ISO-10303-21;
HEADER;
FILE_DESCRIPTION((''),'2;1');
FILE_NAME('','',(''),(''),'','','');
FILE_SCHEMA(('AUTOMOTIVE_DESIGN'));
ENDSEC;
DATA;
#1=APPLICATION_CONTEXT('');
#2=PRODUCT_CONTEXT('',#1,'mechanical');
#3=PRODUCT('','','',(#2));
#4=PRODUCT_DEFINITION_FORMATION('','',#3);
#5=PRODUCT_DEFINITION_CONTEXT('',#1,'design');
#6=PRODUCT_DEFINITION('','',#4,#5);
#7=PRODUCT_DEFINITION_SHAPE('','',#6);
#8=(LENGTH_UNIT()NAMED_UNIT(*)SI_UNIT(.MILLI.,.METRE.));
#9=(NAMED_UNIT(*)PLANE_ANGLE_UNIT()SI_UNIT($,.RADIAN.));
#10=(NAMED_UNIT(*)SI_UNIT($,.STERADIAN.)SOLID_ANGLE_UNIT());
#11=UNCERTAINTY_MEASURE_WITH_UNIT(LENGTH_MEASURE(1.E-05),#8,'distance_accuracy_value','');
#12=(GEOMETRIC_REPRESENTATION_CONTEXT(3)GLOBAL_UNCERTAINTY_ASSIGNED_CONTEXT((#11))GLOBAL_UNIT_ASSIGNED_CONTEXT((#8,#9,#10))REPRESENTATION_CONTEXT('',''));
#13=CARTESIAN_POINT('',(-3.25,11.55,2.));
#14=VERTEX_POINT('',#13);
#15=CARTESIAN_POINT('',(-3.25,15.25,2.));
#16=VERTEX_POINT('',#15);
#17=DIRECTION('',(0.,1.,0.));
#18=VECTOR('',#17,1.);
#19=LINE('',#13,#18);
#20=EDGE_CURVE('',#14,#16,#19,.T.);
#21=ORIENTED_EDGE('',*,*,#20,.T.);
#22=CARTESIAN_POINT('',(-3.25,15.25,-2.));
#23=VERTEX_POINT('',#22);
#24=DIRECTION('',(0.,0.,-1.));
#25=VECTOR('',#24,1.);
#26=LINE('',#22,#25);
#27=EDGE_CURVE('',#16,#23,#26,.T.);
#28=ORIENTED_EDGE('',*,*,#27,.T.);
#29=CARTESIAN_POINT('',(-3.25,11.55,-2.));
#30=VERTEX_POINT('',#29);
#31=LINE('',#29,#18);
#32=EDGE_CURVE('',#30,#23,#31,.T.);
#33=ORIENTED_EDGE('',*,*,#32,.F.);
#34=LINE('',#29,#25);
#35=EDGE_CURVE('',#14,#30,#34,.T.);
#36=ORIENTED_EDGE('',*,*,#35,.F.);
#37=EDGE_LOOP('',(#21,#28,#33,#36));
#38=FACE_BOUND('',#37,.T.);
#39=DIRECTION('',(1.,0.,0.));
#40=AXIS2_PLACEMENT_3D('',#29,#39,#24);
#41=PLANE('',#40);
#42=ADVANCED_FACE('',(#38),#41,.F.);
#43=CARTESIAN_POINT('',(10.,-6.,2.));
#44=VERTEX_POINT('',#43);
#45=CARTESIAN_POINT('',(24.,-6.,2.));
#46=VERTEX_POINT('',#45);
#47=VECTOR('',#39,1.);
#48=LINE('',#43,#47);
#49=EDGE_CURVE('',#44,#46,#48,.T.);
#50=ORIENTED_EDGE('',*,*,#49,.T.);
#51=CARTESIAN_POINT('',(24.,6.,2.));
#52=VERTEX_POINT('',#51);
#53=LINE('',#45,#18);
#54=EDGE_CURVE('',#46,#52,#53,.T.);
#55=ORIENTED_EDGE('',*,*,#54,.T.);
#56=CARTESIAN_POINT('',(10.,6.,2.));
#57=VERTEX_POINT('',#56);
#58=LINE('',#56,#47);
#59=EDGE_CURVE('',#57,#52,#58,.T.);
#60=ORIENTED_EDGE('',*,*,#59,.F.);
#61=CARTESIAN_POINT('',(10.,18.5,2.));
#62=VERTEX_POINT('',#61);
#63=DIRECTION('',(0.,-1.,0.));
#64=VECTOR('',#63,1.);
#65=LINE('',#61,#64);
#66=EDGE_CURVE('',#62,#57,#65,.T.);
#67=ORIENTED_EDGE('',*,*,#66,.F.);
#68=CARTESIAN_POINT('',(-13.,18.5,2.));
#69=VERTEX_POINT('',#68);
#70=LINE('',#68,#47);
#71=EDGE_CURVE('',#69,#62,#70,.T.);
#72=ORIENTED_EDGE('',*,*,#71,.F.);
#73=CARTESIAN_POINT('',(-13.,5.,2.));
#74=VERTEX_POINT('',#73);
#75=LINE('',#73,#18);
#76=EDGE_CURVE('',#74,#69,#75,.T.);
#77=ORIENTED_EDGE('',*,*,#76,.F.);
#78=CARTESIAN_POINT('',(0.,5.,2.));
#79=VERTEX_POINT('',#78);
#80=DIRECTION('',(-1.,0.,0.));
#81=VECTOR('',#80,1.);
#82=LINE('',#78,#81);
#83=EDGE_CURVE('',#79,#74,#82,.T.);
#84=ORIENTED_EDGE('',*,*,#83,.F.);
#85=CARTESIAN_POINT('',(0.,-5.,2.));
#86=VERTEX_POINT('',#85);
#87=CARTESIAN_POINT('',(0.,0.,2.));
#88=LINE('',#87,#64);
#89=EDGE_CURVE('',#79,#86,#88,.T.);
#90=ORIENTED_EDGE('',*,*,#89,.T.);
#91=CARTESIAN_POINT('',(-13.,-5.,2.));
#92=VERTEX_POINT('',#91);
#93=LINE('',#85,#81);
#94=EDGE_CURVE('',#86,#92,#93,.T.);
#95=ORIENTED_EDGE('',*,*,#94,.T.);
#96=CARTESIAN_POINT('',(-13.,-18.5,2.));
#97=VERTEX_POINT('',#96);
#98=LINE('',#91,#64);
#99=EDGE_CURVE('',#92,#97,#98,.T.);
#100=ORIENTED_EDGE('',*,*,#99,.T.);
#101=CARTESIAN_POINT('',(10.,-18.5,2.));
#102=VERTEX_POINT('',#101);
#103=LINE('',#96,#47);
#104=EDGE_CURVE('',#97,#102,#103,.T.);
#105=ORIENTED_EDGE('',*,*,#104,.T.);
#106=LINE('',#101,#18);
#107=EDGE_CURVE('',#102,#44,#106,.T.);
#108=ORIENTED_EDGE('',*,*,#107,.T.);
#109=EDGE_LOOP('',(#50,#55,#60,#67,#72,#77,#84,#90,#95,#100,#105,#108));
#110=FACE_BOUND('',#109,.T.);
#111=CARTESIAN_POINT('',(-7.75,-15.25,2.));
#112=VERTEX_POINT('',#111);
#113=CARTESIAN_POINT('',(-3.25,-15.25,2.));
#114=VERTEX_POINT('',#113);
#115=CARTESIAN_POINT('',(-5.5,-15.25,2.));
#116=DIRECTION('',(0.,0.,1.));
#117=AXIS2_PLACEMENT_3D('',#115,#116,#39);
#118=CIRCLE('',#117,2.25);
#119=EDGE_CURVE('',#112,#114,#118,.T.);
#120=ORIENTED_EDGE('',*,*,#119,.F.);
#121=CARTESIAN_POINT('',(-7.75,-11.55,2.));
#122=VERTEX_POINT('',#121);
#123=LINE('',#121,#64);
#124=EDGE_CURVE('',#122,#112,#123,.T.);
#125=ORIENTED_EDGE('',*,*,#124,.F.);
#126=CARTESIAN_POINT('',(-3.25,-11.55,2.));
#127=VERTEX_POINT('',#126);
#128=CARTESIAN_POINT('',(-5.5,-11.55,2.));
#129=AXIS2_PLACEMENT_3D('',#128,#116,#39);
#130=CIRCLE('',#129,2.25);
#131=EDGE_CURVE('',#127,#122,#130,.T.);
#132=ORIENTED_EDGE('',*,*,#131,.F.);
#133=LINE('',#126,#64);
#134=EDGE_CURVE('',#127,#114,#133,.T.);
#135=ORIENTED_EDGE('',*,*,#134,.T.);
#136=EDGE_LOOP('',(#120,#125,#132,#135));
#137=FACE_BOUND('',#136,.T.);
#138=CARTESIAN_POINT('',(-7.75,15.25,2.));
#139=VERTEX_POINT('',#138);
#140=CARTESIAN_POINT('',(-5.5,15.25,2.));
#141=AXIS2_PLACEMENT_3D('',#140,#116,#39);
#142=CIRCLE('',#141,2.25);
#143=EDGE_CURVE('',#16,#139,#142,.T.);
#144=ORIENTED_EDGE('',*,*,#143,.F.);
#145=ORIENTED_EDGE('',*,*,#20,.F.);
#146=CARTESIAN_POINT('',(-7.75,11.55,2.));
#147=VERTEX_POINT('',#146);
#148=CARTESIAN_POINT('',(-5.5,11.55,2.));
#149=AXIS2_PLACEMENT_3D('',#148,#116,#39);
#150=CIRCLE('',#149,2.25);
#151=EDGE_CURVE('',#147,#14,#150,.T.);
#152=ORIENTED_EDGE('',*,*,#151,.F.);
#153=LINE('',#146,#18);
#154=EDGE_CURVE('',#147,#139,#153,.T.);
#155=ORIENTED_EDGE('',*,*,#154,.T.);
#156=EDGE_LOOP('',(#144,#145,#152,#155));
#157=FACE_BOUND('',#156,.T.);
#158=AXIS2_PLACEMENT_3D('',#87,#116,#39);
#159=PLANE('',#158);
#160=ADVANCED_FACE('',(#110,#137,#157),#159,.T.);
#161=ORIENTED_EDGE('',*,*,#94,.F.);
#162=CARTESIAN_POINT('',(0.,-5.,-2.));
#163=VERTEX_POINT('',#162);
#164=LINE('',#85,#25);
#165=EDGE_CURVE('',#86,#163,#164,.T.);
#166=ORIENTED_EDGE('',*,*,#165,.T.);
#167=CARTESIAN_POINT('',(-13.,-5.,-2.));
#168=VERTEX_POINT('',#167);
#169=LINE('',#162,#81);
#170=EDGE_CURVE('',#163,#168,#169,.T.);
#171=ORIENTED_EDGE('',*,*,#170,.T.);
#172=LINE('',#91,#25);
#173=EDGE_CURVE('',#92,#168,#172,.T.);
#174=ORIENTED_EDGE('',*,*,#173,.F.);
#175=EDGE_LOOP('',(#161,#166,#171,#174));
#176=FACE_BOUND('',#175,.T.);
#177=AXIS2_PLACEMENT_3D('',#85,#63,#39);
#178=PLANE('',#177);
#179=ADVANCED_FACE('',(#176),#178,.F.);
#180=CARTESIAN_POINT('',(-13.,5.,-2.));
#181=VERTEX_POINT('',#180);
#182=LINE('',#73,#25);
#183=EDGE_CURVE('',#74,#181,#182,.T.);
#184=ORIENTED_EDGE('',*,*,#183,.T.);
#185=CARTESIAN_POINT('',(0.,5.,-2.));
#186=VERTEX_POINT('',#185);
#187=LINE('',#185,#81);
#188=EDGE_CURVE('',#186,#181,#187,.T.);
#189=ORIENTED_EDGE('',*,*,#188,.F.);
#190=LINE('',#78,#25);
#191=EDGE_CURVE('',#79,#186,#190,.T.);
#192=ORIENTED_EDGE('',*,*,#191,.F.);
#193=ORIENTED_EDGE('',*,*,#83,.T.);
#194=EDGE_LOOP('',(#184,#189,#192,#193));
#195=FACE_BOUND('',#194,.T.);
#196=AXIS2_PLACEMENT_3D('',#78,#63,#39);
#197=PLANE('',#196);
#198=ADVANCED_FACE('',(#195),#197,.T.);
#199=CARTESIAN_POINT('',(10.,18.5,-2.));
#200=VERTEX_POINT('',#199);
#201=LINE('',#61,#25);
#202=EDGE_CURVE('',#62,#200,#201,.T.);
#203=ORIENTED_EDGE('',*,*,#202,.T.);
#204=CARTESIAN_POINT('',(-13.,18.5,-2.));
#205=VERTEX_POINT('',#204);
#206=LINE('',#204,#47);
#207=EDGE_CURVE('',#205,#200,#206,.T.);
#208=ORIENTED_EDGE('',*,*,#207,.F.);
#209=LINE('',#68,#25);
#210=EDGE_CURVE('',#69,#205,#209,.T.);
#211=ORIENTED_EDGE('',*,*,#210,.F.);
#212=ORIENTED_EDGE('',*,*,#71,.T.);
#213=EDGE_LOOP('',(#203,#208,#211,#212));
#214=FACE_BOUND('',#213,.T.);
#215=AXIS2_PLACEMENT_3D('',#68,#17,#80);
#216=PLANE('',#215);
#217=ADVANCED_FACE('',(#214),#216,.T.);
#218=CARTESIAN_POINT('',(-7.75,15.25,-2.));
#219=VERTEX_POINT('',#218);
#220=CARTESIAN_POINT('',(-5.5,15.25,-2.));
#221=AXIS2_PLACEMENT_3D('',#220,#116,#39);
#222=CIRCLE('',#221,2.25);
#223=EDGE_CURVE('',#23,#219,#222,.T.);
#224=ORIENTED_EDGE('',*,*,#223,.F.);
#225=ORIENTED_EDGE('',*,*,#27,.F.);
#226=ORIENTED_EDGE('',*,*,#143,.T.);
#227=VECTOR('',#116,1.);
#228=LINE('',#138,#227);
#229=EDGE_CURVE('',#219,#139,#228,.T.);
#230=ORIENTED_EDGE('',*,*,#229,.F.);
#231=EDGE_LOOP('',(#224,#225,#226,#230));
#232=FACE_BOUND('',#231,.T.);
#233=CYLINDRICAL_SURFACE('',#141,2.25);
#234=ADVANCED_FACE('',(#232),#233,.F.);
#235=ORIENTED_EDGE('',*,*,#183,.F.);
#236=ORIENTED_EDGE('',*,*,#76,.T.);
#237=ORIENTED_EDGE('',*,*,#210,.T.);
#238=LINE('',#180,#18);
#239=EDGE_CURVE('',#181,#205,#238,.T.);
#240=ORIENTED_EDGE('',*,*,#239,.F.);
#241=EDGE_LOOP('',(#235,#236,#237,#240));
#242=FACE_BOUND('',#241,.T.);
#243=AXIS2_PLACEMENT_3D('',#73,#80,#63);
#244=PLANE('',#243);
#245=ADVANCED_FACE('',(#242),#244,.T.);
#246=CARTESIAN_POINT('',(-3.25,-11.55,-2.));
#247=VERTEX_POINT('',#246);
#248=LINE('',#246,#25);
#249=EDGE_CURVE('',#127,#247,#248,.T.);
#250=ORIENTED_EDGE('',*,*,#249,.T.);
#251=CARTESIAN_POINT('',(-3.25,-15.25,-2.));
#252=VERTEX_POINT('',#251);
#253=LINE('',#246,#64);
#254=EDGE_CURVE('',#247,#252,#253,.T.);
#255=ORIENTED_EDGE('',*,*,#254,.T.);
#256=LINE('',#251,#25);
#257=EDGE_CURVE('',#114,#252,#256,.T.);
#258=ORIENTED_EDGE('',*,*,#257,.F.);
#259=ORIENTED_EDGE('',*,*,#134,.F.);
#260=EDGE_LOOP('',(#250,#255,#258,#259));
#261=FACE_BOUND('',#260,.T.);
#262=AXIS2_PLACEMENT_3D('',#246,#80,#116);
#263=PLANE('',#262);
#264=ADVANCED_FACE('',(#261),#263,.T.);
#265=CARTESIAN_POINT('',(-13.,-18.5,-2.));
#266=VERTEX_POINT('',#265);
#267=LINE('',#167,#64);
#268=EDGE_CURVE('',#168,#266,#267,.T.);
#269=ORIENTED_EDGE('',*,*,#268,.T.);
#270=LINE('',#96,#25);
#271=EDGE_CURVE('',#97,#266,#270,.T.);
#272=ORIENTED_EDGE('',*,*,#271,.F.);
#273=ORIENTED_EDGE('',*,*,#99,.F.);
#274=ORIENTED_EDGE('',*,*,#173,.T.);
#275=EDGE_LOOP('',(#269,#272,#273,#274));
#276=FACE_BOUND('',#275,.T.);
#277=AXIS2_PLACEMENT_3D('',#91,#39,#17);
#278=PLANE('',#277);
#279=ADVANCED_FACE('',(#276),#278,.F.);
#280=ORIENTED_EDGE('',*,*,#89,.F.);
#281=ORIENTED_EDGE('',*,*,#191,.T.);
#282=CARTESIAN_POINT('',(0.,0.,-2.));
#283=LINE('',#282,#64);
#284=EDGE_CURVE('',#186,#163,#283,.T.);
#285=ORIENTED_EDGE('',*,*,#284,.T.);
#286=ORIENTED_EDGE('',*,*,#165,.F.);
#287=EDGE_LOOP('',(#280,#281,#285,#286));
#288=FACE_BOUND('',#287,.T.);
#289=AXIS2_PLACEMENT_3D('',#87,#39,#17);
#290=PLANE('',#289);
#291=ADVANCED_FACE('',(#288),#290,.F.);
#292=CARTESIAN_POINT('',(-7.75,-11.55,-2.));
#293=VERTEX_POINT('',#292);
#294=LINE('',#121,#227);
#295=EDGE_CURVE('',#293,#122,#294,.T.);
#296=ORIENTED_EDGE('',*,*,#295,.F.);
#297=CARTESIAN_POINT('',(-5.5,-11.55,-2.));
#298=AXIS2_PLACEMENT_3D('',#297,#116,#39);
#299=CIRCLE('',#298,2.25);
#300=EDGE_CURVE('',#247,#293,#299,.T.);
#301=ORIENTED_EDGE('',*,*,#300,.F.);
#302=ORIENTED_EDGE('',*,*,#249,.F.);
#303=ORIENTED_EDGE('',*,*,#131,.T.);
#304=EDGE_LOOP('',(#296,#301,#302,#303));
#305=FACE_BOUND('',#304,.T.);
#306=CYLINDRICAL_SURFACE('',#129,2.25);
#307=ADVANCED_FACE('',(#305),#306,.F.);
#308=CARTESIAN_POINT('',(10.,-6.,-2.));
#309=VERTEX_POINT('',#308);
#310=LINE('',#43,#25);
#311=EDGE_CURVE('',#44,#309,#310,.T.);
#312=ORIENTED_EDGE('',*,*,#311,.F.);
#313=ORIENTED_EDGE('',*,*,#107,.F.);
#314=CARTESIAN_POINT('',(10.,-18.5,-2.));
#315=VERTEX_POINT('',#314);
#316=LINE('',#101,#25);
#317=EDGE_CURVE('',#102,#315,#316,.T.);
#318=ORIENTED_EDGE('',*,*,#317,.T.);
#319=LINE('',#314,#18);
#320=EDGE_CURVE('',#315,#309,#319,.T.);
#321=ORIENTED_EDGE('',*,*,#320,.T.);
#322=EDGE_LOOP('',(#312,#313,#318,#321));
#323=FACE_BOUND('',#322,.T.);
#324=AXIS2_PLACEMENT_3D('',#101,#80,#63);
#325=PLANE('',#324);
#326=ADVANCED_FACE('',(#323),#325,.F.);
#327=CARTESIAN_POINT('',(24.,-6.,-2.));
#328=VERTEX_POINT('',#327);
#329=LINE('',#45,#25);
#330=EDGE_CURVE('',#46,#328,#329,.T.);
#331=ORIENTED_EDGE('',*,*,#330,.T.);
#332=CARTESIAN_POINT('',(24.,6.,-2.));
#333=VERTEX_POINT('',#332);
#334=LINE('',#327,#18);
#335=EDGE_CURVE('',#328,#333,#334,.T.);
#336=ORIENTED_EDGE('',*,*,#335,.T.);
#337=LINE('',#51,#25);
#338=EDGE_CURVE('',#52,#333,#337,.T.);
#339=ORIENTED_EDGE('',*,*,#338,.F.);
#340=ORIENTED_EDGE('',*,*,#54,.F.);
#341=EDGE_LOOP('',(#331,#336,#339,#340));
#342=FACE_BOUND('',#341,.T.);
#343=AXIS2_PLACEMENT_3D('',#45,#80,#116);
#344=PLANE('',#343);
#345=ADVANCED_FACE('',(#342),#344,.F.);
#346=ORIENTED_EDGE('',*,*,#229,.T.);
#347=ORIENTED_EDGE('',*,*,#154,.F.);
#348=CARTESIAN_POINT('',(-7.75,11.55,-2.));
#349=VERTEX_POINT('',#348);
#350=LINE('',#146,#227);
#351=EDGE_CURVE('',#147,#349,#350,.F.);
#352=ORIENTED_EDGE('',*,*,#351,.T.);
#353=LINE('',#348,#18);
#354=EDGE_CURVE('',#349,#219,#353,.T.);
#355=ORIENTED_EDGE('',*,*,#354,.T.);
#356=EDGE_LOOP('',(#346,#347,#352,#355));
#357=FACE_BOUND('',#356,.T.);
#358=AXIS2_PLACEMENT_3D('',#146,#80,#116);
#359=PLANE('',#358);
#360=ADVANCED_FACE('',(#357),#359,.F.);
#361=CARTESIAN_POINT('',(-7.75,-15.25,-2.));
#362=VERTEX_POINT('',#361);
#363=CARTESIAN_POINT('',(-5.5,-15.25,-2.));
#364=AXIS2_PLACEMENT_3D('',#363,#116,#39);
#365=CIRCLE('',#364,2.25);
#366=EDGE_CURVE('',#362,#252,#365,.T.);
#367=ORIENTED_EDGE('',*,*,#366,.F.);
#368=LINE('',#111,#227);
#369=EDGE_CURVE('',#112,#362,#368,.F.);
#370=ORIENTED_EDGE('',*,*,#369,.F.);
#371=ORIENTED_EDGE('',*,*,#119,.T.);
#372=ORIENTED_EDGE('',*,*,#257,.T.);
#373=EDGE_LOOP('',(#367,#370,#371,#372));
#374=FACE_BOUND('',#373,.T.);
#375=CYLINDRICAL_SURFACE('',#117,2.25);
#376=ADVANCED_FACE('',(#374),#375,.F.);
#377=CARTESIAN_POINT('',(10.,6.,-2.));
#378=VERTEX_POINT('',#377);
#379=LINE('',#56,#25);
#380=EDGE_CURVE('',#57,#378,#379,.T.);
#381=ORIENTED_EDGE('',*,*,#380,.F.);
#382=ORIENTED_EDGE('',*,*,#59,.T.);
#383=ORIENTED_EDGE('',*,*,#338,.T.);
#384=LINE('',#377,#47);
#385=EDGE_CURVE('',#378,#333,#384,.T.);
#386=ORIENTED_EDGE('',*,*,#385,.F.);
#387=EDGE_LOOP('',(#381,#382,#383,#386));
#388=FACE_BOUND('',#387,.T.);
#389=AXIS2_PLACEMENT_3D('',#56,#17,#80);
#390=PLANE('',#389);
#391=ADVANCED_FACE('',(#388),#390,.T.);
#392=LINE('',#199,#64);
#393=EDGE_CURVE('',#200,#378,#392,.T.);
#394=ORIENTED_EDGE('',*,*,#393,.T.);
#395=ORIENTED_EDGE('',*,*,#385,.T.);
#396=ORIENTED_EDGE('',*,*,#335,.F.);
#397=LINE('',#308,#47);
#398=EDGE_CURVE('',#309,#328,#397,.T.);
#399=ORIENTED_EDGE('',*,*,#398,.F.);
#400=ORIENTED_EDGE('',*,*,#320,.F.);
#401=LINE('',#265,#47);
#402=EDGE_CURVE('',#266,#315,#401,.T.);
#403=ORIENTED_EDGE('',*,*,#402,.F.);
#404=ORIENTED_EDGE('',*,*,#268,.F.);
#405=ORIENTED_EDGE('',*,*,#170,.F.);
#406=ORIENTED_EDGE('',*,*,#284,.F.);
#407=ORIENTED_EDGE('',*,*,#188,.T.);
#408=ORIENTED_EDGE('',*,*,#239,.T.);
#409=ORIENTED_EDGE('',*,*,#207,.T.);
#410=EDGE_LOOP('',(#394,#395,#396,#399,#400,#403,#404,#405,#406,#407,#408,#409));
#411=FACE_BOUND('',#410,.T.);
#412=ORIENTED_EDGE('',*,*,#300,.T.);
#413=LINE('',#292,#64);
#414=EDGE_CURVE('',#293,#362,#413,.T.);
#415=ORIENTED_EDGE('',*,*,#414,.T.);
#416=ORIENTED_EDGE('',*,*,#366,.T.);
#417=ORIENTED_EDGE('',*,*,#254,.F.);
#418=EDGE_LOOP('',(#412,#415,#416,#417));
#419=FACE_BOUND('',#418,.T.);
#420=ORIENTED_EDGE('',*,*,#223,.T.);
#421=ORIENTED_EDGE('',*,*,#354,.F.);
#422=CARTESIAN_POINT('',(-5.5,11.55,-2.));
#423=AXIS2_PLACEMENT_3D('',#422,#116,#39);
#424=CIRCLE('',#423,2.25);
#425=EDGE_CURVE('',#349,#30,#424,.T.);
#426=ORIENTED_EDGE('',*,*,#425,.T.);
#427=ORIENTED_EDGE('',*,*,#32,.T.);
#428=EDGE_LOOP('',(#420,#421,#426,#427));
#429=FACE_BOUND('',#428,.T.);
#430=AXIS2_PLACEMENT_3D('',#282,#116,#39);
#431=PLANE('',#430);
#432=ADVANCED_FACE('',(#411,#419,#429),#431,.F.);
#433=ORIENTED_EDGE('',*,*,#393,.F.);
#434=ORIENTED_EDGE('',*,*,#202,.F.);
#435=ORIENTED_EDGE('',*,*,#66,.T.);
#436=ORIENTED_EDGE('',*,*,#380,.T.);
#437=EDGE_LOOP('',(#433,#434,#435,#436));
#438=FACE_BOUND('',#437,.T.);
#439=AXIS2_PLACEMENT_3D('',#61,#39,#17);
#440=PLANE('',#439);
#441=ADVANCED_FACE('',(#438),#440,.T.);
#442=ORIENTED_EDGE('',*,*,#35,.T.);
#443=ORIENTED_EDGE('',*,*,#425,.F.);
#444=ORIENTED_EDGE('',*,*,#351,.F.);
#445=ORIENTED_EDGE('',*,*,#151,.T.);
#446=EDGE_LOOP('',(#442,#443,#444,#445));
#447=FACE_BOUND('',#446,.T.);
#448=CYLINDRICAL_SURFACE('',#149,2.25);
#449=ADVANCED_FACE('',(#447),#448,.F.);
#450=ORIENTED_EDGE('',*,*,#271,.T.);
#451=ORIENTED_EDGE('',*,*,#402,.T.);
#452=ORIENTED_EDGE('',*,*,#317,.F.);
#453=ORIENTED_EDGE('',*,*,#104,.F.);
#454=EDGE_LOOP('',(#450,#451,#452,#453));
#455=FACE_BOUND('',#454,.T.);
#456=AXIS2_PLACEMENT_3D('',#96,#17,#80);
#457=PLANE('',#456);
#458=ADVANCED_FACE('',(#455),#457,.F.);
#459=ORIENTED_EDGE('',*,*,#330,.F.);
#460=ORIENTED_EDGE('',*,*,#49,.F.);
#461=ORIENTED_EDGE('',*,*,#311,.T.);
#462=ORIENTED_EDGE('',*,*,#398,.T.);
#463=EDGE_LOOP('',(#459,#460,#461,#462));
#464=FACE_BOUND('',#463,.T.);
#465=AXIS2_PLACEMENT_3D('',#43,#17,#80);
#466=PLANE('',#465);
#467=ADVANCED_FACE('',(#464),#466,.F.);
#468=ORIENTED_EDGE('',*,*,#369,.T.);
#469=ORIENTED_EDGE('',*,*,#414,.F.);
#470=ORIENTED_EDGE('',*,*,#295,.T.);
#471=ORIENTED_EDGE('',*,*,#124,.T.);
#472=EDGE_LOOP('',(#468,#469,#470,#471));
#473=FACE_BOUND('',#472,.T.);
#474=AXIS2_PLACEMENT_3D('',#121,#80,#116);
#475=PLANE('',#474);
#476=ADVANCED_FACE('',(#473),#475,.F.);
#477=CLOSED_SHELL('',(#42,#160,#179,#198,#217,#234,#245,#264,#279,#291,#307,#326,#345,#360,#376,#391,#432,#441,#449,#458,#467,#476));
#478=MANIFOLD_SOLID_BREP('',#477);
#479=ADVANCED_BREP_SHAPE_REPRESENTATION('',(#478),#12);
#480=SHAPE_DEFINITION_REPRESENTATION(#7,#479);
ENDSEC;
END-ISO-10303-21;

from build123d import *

# Parameters (mm, degrees)
BOSS_EXTRUDE1_DEPTH      = 2
M4_START                 = -2
M4_CLEARANCE_SLOT1_DEPTH = 4


# Read off the part's stored shape, not the designer's step: M4 Clearance Slot1
with BuildPart() as part:
    # Sketch1 → Boss-Extrude1 (new, symmetric)
    with BuildSketch(Plane.XY):
        Polygon((0, 0), (0, -5), (-13, -5), (-13, -18.5), (10, -18.5), (10, -6), (24, -6), (24, 0), align=None)
    boss_extrude1 = extrude(amount=BOSS_EXTRUDE1_DEPTH, both=True)

    # M4 Clearance Slot1 outline → M4 Clearance Slot1 (cut)
    with BuildSketch(Plane.XY.offset(M4_START)):
        with BuildLine():
            Line((-7.75, -11.55), (-7.75, -15.25))
            ThreePointArc((-7.75, -15.25), (-5.5, -17.5), (-3.25, -15.25))
            Line((-3.25, -15.25), (-3.25, -11.55))
            ThreePointArc((-3.25, -11.55), (-5.5, -9.3), (-7.75, -11.55))
        make_face()
    m4_clearance_slot1 = extrude(amount=M4_CLEARANCE_SLOT1_DEPTH, mode=Mode.SUBTRACT)

    # Mirror2: Boss-Extrude1, M4 Clearance Slot1 across plane
    add(boss_extrude1.mirror(Plane.ZX))
    add(m4_clearance_slot1.mirror(Plane.ZX), mode=Mode.SUBTRACT)


solid = part.part
